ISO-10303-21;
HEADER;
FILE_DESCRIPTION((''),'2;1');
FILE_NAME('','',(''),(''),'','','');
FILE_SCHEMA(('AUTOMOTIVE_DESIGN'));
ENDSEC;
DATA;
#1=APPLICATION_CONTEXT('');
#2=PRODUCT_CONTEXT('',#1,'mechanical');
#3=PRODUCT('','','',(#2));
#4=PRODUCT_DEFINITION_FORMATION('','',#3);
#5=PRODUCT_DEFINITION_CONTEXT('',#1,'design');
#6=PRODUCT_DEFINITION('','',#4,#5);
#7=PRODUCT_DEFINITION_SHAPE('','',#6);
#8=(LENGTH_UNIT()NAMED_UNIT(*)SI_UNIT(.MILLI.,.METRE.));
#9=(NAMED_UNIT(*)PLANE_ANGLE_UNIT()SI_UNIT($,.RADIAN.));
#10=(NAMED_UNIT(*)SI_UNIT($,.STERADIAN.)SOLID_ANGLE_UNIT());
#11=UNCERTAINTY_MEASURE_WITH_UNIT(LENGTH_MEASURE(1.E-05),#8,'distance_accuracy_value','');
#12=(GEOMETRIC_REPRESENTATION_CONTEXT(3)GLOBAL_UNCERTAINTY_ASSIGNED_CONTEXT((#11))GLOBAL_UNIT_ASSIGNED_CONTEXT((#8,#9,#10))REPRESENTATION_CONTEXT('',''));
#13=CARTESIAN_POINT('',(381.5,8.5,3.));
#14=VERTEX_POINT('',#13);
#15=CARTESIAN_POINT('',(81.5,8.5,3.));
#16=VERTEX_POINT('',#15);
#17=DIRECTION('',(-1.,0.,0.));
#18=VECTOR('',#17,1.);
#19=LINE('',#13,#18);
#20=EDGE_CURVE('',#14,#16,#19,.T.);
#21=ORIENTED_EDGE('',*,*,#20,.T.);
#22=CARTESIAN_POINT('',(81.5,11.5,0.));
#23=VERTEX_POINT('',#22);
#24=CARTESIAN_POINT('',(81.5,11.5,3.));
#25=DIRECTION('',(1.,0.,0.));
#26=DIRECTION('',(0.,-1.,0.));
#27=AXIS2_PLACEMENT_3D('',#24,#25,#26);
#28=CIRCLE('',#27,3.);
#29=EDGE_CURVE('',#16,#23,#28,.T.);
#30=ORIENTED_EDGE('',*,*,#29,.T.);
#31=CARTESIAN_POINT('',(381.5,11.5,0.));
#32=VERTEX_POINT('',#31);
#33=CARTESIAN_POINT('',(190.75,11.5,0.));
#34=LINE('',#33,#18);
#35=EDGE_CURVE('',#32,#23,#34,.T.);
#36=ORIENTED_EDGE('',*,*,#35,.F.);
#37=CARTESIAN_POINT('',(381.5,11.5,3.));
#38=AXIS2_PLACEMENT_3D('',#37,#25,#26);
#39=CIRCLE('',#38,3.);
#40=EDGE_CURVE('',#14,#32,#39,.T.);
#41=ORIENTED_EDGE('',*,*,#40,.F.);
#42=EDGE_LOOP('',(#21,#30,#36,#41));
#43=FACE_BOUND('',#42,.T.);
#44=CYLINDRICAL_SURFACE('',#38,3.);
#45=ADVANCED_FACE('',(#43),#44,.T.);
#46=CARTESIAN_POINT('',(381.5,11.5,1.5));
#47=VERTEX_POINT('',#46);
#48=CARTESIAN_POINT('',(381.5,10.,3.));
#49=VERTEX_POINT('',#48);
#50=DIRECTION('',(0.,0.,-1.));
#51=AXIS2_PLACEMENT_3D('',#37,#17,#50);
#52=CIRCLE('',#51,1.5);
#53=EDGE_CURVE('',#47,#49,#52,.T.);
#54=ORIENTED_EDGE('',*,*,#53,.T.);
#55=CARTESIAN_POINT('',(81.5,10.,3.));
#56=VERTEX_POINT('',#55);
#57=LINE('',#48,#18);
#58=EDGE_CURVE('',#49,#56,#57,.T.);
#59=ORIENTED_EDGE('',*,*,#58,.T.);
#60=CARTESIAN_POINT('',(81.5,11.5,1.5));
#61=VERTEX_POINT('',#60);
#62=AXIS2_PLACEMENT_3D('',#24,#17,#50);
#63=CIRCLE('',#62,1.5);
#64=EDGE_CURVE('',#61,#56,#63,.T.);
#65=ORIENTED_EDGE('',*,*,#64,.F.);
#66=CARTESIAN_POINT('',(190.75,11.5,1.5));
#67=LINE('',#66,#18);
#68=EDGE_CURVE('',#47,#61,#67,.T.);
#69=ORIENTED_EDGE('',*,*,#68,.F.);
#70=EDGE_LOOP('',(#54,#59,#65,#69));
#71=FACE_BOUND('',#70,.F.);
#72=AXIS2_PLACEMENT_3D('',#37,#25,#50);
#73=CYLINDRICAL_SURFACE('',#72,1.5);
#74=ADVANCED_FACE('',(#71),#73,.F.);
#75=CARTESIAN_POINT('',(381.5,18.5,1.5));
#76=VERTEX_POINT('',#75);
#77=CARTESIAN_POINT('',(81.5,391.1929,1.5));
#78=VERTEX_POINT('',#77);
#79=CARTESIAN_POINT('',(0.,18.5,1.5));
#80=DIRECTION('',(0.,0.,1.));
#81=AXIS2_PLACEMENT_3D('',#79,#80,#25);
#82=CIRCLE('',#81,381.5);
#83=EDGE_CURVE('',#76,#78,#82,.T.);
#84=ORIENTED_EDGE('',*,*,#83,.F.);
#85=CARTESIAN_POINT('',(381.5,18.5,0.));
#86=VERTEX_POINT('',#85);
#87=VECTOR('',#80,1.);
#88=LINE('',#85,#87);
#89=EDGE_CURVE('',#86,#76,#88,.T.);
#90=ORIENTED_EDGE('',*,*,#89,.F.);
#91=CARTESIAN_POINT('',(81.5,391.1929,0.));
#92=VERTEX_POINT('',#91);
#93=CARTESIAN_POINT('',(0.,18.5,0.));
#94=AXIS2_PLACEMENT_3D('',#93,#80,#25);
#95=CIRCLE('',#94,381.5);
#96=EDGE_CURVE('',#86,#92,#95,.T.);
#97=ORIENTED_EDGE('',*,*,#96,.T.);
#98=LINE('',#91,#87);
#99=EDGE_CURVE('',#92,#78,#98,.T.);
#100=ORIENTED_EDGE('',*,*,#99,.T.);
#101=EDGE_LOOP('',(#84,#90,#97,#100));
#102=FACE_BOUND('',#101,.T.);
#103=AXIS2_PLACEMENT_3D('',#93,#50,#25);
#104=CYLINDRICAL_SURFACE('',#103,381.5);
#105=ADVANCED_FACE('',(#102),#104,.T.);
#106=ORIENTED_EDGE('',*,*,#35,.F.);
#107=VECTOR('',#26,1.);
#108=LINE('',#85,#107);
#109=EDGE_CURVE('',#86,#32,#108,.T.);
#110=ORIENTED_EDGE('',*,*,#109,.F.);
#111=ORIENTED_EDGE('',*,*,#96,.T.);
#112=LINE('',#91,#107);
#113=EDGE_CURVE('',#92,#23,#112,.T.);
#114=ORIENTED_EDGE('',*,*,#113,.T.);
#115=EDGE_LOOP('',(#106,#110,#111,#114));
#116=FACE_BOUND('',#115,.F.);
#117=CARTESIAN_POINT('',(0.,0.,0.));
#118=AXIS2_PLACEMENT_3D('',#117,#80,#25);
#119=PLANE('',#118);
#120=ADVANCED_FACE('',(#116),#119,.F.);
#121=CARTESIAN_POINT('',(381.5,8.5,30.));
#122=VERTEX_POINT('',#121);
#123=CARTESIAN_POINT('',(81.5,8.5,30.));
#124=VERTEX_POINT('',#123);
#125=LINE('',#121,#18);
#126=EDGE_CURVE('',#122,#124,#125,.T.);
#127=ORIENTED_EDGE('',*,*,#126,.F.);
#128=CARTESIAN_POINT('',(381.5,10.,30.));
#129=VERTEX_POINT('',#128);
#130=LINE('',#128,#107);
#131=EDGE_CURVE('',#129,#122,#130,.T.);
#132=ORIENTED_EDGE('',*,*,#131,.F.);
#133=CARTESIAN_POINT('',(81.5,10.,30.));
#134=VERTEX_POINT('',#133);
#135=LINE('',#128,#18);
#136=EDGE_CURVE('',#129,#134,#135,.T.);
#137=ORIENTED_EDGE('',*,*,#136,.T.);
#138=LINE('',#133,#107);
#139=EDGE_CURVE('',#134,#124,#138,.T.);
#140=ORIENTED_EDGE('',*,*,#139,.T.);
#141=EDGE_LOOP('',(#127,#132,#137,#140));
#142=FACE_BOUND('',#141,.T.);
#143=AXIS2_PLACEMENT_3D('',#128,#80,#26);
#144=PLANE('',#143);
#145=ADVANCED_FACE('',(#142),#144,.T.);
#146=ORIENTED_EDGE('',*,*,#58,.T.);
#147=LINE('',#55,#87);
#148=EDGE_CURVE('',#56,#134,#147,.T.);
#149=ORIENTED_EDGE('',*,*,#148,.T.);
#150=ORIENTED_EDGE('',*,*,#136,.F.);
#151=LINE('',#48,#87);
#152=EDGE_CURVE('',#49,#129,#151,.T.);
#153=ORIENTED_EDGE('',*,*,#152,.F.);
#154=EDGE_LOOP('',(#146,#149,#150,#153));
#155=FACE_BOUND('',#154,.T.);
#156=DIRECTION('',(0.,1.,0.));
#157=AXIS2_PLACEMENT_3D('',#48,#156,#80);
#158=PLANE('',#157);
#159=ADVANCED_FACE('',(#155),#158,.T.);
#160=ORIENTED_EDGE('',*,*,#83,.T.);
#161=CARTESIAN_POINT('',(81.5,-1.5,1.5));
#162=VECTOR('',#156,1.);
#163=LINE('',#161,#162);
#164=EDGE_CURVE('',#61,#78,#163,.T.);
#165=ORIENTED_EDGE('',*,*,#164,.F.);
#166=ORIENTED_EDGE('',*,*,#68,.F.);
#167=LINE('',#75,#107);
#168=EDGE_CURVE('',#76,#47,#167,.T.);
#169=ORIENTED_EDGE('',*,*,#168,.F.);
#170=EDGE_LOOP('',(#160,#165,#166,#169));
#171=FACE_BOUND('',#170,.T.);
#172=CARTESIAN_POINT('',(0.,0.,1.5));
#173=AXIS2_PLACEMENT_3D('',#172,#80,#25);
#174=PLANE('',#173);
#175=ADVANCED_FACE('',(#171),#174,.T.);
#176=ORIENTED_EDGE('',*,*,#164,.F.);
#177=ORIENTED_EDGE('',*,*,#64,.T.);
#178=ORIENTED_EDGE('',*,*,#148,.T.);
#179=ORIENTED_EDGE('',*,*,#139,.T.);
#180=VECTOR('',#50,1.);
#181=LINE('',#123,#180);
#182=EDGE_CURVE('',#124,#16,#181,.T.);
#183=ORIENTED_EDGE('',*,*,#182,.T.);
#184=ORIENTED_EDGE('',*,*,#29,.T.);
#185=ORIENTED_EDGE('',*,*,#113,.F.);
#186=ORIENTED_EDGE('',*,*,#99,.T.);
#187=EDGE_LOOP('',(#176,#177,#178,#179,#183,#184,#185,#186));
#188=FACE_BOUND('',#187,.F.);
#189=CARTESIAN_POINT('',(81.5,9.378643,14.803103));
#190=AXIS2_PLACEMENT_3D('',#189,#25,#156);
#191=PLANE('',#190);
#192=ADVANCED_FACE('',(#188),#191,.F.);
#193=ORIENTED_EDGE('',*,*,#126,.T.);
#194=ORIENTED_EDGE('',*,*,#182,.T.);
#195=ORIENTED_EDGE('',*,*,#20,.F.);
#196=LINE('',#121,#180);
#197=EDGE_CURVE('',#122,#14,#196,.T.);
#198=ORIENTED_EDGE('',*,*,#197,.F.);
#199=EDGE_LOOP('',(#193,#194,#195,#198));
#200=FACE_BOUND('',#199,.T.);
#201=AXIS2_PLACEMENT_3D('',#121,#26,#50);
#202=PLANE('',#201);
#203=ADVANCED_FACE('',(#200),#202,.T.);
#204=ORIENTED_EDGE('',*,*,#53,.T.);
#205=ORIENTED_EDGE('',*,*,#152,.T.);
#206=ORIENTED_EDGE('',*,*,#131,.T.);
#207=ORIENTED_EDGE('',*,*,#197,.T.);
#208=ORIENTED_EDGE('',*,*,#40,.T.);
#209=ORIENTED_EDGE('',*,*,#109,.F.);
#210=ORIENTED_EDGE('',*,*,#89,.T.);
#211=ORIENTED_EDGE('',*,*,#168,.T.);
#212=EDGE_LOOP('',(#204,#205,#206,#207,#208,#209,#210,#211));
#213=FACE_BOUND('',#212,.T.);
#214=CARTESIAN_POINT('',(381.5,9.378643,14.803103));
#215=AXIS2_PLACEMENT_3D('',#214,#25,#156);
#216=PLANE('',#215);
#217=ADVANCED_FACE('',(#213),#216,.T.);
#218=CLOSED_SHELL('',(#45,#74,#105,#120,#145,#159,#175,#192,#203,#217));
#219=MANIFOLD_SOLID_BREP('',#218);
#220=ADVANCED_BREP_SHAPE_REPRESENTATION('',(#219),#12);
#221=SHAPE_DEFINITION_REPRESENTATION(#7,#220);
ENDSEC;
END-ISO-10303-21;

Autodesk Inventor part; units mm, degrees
ref_plane "YZ Plane" through (0, 0, 0) normal (1, 0, 0) x (0, 1, 0)
ref_plane "XZ Plane" through (0, 0, 0) normal (0, 1, 0) x (-1, 0, 0)
ref_plane "XY Plane" through (0, 0, 0) normal (0, 0, 1) x (1, 0, 0)
ref_plane "Work Plane1" through (0, 0, 0) normal (0, 0, 1) x (1, 0, 0)
sketch "Sketch1" plane through (0, 0, 0) normal (0, 0, 1) x (1, 0, 0)
  arc A0 (381.5, 18.5) -> (0, 400) centre (0, 18.5) ccw
  line L0 (381.5, 18.5) -> (81.5, 18.5)
  line L1 (81.5, 18.5) -> (81.5, 391.1929)
  line L2 (81.5, 18.5) -> (381.5, 18.5)
  line L3 (381.5, 18.5) -> (381.5, -1.5)
  line L4 (381.5, -1.5) -> (81.5, -1.5)
  line L5 (81.5, -1.5) -> (81.5, 18.5)
  point P0 (0, 0)
  dimension "d0" = 300
  dimension "d2" = 20
extrude "Plate1" add sketch "Sketch1" along normal blind 1.5
sketch "Sketch2" plane through (0, 0, 1.5) normal (0, 0, 1) x (1, 0, 0)
  arc A0 (381.5, 18.5) -> (81.5, 391.1929) centre (0, 18.5) ccw projected
  line L0 (81.5, -1.5) -> (81.5, 391.1929) projected
  line L1 (381.5, -1.5) -> (81.5, -1.5) projected
  line L2 (381.5, 18.5) -> (381.5, -1.5) projected
  line L3 (81.5, 8.5) -> (381.5, 8.5)
  point P0 (0, 0)
  dimension "d3" = 10
extrude "Extrusion1" cut sketch "Sketch2" against normal through all contours L2 L1 L0 L3
sketch "Sketch3" plane through (381.5, 10, 0) normal (0, -1, 0) x (1, 0, 0)
  line L0 (-300, 0) -> (0, 0)
  line L1 (0, 0) -> (0, 30)
  line L2 (0, 30) -> (-300, 30)
  line L3 (-300, 30) -> (-300, 0)
edge flange "Flange1" height 30 angle 90 thickness 1.5 bend radius 1.5 thickness toward (0, -1, 0) relief tear relief width 1.5 relief depth 0.75 edges at (231.5, 8.5, 1.5) wall of the first edge with corners at (81.5, 10, 0) (381.5, 10, 0) (381.5, 10, 30) (81.5, 10, 30)
bend "Bend1"
corner "Corner1"
equation "\"d1\" = Thickness"
equation "\"d6\" = BendReliefWidth"
equation "\"d7\" = BendReliefDepth"
equation "\"d8\" = MinimumRemnant"
equation "\"d9\" = TransitionRadius"
equation "\"d12\" = BendRadius"
equation "\"d13\" = CornerReliefSize"
equation "\"d14\" = GapSize"
equation "\"d15\" = JacobiRadiusSize"
equation "\"BendRadius\" = Thickness"
equation "\"BendReliefWidth\" = Thickness"
equation "\"BendReliefDepth\" = 0.5 * Thickness"
equation "\"CornerReliefSize\" = 4 * Thickness"
equation "\"MinimumRemnant\" = 2 * Thickness"
equation "\"TransitionRadius\" = BendRadius"
equation "\"JacobiRadiusSize\" = BendRadius"
equation "\"GapSize\" = Thickness"
equation "\"Thickness\" = 1.5"
properties part number "CHAPA_7"
